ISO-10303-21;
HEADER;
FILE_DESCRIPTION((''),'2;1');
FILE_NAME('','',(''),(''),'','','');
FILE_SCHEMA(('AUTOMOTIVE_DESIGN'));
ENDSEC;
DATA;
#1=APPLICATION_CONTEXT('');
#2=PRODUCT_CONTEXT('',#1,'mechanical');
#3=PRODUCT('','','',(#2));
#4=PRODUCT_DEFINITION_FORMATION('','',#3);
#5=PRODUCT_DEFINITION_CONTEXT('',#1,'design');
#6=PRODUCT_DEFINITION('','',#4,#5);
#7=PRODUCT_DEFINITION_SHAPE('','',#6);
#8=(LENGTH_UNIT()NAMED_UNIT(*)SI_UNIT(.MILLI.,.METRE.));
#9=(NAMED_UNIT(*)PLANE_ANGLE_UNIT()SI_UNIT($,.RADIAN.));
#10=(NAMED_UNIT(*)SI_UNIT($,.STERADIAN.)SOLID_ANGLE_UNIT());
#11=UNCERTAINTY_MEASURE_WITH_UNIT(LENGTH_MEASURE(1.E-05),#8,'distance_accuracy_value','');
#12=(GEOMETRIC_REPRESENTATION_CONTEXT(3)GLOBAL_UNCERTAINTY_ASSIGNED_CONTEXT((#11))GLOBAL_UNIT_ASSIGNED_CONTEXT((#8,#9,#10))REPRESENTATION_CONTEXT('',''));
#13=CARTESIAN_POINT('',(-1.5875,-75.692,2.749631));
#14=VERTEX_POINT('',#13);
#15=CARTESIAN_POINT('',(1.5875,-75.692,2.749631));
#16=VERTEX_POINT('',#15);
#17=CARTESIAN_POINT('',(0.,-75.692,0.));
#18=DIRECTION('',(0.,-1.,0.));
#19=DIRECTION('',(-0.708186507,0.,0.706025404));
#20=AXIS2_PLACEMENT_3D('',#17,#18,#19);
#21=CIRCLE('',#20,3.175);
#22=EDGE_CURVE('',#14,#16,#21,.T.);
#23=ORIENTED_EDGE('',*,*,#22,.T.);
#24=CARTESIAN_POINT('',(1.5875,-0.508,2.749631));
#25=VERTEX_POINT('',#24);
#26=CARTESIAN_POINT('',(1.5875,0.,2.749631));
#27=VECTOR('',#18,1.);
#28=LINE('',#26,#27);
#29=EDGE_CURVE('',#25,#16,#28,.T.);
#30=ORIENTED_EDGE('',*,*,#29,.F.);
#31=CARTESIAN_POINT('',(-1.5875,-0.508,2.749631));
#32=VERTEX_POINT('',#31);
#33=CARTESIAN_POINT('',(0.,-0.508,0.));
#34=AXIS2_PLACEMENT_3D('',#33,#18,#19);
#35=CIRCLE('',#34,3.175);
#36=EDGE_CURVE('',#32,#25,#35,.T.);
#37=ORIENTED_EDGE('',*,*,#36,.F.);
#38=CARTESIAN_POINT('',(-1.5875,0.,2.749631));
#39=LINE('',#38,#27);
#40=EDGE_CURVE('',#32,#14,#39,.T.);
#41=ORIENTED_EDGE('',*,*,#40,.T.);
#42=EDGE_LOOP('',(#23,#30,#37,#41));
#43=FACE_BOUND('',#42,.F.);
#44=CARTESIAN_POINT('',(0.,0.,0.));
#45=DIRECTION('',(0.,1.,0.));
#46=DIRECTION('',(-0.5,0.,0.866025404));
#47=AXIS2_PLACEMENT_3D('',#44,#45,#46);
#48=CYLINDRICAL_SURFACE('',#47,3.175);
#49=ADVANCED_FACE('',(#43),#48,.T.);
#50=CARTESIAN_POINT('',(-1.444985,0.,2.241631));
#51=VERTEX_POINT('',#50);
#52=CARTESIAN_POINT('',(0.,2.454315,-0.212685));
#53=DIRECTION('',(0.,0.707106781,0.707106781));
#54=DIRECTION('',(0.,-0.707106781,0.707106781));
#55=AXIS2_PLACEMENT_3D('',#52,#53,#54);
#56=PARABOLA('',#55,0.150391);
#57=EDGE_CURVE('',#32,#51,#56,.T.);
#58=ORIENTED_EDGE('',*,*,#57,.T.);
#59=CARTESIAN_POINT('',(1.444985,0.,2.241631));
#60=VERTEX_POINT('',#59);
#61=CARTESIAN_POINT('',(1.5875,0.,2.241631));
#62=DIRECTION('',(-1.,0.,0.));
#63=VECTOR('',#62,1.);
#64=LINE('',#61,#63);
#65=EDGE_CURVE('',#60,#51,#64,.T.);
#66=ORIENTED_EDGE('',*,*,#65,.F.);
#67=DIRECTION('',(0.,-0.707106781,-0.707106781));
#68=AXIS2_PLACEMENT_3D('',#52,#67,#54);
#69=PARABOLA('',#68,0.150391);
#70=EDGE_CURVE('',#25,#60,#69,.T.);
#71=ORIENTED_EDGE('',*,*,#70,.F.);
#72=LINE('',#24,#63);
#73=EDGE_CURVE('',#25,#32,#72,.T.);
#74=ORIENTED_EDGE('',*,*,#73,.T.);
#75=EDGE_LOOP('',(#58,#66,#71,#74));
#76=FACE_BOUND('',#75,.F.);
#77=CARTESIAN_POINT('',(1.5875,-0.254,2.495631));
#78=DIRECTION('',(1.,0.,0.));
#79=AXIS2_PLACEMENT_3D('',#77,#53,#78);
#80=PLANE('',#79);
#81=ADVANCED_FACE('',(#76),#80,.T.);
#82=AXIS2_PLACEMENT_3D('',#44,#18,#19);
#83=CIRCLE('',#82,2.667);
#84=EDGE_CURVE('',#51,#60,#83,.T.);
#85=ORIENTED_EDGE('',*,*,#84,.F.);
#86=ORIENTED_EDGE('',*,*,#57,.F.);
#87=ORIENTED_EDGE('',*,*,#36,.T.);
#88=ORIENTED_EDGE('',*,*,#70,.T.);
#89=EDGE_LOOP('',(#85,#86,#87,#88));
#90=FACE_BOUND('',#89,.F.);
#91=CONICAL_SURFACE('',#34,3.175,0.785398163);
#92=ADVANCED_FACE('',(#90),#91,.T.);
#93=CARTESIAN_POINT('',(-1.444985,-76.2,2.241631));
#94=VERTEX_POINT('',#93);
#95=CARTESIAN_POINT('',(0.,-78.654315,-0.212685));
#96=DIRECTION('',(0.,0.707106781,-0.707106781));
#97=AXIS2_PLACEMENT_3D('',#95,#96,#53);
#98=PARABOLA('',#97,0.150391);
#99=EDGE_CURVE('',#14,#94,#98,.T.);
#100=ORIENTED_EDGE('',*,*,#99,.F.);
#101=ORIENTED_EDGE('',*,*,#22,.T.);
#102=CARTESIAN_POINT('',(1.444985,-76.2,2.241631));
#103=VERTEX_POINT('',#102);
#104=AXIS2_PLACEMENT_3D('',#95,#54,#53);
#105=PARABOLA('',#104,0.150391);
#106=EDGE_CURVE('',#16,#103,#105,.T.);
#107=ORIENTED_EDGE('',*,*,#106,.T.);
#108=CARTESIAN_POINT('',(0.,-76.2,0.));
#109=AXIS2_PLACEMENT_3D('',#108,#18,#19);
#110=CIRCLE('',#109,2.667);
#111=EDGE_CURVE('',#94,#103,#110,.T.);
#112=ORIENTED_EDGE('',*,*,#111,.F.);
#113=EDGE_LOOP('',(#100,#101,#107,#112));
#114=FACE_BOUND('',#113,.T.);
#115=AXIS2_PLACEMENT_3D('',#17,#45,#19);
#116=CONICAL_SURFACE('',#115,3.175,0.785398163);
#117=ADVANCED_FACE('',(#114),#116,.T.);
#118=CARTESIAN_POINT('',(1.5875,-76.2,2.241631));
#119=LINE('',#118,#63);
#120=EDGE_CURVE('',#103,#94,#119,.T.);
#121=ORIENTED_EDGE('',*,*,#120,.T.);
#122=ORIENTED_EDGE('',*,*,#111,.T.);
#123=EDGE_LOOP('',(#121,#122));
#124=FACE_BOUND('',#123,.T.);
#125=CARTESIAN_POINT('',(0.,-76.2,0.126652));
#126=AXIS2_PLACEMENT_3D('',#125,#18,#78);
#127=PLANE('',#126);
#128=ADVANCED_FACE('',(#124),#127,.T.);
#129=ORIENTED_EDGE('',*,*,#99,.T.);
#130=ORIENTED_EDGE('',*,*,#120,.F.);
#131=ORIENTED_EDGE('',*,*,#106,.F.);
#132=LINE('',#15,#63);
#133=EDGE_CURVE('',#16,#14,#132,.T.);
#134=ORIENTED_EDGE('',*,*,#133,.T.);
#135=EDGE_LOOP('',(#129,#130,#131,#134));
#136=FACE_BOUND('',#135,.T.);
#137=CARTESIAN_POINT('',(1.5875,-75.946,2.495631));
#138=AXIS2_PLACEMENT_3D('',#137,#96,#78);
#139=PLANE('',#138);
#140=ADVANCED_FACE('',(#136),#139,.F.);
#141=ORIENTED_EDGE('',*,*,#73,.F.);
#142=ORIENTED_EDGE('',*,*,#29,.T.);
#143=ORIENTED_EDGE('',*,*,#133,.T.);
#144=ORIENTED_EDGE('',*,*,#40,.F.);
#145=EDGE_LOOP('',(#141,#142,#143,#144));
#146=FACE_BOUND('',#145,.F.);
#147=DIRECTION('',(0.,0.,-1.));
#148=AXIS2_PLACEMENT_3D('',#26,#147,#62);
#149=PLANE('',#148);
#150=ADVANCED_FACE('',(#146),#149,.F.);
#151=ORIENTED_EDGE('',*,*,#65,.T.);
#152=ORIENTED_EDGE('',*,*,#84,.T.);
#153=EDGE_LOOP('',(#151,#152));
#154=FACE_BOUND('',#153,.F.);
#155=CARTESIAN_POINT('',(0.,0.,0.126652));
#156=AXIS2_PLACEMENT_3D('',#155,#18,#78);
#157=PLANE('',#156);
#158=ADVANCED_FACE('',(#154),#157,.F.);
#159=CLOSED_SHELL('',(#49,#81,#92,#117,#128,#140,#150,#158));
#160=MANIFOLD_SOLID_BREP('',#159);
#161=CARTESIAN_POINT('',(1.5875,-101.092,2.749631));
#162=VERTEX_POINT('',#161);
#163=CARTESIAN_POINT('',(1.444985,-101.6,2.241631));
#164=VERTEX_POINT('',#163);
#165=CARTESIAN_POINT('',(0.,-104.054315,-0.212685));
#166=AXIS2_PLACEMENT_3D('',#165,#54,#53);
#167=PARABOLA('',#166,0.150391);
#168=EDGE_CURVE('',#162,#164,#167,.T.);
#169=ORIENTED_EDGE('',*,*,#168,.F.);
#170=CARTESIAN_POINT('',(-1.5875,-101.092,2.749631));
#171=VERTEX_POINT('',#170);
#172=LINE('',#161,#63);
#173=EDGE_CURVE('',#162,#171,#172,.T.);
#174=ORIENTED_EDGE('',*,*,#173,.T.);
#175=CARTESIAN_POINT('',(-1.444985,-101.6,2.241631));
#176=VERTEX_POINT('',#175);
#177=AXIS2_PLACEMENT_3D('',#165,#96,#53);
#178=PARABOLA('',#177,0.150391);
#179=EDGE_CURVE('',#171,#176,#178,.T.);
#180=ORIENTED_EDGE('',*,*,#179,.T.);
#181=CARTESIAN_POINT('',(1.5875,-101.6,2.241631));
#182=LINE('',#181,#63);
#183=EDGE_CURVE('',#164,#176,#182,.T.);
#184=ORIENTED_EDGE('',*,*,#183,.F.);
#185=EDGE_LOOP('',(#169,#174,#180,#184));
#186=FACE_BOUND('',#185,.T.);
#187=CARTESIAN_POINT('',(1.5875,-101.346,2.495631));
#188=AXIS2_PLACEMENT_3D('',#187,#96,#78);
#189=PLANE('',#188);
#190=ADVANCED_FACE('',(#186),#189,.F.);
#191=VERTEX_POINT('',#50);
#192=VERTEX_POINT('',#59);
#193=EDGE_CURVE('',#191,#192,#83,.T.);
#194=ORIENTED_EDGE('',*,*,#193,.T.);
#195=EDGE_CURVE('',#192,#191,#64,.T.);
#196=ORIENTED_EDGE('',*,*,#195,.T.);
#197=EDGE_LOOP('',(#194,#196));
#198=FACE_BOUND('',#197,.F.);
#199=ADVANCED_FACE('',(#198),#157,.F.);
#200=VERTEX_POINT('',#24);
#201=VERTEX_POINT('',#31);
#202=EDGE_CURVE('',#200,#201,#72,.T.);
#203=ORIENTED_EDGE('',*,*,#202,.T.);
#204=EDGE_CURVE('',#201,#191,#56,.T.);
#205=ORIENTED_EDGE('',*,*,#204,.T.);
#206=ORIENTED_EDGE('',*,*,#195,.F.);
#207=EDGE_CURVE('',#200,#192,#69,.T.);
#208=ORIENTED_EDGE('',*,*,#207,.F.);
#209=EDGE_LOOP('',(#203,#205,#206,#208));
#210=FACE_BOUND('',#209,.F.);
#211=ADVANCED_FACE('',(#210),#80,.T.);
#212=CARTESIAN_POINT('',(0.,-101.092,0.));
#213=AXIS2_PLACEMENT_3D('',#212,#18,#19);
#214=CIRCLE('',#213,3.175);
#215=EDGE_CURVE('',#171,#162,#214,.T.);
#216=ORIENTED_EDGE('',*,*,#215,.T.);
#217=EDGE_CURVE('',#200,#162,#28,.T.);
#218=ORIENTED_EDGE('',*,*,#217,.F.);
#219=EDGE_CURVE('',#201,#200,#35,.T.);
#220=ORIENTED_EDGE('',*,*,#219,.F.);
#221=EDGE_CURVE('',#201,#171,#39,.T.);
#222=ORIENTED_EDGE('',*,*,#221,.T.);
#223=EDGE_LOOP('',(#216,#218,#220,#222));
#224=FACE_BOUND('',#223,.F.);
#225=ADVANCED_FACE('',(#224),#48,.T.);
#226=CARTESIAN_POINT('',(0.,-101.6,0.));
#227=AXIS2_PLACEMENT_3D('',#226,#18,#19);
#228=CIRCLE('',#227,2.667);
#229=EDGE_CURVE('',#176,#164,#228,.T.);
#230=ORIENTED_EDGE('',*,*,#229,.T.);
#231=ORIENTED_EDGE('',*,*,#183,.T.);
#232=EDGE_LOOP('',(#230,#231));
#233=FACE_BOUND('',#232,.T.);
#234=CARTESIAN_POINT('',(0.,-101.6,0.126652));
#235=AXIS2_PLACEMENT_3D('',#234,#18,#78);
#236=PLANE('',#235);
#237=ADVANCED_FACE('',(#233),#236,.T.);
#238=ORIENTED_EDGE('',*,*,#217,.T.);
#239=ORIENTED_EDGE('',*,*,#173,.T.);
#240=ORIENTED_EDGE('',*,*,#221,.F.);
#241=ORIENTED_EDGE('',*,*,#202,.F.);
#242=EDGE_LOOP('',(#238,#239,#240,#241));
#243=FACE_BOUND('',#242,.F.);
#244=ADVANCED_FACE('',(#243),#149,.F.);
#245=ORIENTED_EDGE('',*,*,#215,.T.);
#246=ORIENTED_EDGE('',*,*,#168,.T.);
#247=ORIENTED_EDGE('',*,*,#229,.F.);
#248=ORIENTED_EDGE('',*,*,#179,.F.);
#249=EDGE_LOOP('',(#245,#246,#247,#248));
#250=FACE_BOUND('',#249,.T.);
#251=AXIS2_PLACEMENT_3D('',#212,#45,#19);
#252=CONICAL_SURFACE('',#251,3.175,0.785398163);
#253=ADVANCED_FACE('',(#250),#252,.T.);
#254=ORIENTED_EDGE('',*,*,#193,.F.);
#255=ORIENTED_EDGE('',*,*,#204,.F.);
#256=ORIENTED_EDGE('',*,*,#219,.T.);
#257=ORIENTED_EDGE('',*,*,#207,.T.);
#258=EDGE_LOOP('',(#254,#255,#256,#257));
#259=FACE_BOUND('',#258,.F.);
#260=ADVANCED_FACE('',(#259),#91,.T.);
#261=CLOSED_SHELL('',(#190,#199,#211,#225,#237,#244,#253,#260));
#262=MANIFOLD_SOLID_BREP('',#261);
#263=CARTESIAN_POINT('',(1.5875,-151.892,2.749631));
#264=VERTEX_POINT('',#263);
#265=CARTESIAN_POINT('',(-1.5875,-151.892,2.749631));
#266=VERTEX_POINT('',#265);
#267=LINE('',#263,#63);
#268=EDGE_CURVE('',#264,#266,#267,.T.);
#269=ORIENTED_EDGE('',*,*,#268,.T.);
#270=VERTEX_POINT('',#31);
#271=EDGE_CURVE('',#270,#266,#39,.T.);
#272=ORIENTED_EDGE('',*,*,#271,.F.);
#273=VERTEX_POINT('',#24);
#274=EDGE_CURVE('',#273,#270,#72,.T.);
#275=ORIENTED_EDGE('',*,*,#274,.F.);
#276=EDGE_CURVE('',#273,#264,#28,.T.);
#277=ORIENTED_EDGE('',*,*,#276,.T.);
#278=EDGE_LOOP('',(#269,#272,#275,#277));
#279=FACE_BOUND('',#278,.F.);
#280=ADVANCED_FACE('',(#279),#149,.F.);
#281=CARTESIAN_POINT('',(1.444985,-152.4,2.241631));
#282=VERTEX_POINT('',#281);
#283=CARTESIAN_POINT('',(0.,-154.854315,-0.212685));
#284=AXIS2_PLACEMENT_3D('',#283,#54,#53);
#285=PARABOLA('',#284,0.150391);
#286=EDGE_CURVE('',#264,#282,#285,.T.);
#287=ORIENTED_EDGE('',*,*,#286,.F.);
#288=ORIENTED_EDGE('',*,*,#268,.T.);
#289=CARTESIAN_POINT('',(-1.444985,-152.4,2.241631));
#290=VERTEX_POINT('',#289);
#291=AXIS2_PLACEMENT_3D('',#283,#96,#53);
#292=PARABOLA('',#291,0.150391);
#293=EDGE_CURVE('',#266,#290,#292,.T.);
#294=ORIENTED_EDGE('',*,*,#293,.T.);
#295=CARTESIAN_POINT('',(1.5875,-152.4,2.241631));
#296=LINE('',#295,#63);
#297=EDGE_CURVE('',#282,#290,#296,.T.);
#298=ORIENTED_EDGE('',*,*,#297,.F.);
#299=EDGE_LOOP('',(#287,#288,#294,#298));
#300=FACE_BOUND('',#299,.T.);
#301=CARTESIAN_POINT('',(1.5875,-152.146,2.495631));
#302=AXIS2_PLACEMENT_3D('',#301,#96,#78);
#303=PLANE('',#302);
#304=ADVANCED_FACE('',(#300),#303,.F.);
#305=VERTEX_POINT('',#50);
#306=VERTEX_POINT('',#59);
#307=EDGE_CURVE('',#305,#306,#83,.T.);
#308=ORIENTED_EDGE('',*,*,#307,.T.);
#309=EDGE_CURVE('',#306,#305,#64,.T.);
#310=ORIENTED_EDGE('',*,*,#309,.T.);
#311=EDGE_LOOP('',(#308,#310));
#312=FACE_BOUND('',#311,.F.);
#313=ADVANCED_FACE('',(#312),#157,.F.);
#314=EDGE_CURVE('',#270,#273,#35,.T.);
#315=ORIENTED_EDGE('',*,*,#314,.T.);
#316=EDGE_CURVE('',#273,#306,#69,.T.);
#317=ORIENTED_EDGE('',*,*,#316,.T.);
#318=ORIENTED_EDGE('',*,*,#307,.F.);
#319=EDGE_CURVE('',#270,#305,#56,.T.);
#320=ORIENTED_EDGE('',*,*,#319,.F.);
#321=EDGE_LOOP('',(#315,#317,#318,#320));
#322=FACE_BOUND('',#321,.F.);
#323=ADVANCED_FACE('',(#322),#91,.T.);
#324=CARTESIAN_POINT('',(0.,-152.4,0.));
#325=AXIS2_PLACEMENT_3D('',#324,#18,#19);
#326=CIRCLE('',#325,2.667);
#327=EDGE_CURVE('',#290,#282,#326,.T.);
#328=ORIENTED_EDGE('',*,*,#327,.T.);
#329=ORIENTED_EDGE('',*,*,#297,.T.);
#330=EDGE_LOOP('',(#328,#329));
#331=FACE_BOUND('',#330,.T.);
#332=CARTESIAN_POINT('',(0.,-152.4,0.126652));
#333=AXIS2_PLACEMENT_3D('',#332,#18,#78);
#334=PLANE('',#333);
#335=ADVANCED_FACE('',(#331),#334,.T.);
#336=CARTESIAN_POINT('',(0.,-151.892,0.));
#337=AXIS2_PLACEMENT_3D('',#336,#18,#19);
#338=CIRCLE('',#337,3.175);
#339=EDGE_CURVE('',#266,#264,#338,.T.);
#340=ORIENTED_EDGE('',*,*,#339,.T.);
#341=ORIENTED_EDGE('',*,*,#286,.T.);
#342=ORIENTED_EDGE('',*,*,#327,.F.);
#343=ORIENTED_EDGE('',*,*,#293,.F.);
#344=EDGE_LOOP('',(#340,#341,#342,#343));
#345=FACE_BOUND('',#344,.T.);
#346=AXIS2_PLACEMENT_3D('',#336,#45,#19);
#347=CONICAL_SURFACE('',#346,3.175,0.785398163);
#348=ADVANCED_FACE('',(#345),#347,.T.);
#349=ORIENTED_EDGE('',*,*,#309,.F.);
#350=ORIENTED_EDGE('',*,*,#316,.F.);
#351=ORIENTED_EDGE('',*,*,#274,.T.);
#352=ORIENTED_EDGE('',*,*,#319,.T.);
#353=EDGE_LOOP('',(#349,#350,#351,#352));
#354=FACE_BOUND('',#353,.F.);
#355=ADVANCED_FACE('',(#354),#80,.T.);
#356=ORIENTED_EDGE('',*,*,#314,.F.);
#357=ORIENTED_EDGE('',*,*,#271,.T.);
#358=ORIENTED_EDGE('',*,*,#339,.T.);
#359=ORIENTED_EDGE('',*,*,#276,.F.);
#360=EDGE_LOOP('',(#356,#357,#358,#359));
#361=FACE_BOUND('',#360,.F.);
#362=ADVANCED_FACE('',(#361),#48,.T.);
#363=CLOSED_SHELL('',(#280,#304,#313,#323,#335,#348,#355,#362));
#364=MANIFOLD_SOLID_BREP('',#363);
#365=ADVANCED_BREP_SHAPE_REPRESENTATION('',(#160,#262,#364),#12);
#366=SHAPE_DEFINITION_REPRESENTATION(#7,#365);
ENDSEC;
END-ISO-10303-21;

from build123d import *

# Parameters (mm, degrees)
F1_DEPTH     = 152.4
F2_DEPTH     = 76.2
F3_DEPTH     = 101.6
F4_C1_SIZE   = 0.508
F4_C2_SIZE   = 0.508
F4_C3_SIZE   = 0.508
F4_C4_SIZE   = 0.508
F4_2_C1_SIZE = 0.508
F4_2_C2_SIZE = 0.508
F4_2_C3_SIZE = 0.508
F4_2_C4_SIZE = 0.508
F4_3_C1_SIZE = 0.508
F4_3_C2_SIZE = 0.508
F4_3_C3_SIZE = 0.508
F4_3_C4_SIZE = 0.508


with BuildPart() as f1:
    # F0 (on Front) → F1 (new body)
    with BuildSketch(Plane.XZ):
        with BuildLine():
            Line((1.5875, 2.749630657), (-1.5875, 2.749630657))
            ThreePointArc((-1.5875, 2.749630657), (0, -3.175), (1.5875, 2.749630657))
        make_face()
    extrude(amount=F1_DEPTH)

    # F4: chamfer of 0.508 on 4 edges, made by hand

    # F4_c1
    f4_c1_edges = [f1.edges().sort_by_distance(p)[0] for p in [
        (0, 0, 2.749630657),
    ]]
    chamfer(f4_c1_edges, length=F4_C1_SIZE)

    # F4_c2
    f4_c2_edges = [f1.edges().sort_by_distance(p)[0] for p in [
        (0, -152.4, 2.749630657),
    ]]
    chamfer(f4_c2_edges, length=F4_C2_SIZE)

    # F4_c3
    f4_c3_edges = [f1.edges().sort_by_distance(p)[0] for p in [
        (0, 0, -3.175),
    ]]
    chamfer(f4_c3_edges, length=F4_C3_SIZE)

    # F4_c4
    f4_c4_edges = [f1.edges().sort_by_distance(p)[0] for p in [
        (0, -152.4, -3.175),
    ]]
    chamfer(f4_c4_edges, length=F4_C4_SIZE)


with BuildPart() as f2:
    # F0 (on Front) → F2 (new body)
    with BuildSketch(Plane.XZ):
        with BuildLine():
            Line((1.5875, 2.749630657), (-1.5875, 2.749630657))
            ThreePointArc((-1.5875, 2.749630657), (0, -3.175), (1.5875, 2.749630657))
        make_face()
    extrude(amount=F2_DEPTH)

    # F4#2: chamfer of 0.508 on 4 edges, made by hand

    # F4_2_c1
    f4_2_c1_edges = [f2.edges().sort_by_distance(p)[0] for p in [
        (0, 0, 2.749630657),
    ]]
    chamfer(f4_2_c1_edges, length=F4_2_C1_SIZE)

    # F4_2_c2
    f4_2_c2_edges = [f2.edges().sort_by_distance(p)[0] for p in [
        (0, -76.2, 2.749630657),
    ]]
    chamfer(f4_2_c2_edges, length=F4_2_C2_SIZE)

    # F4_2_c3
    f4_2_c3_edges = [f2.edges().sort_by_distance(p)[0] for p in [
        (0, 0, -3.175),
    ]]
    chamfer(f4_2_c3_edges, length=F4_2_C3_SIZE)

    # F4_2_c4
    f4_2_c4_edges = [f2.edges().sort_by_distance(p)[0] for p in [
        (0, -76.2, -3.175),
    ]]
    chamfer(f4_2_c4_edges, length=F4_2_C4_SIZE)


with BuildPart() as f3:
    # F0 (on Front) → F3 (new body)
    with BuildSketch(Plane.XZ):
        with BuildLine():
            Line((1.5875, 2.749630657), (-1.5875, 2.749630657))
            ThreePointArc((-1.5875, 2.749630657), (0, -3.175), (1.5875, 2.749630657))
        make_face()
    extrude(amount=F3_DEPTH)

    # F4#3: chamfer of 0.508 on 4 edges, made by hand

    # F4_3_c1
    f4_3_c1_edges = [f3.edges().sort_by_distance(p)[0] for p in [
        (0, 0, 2.749630657),
    ]]
    chamfer(f4_3_c1_edges, length=F4_3_C1_SIZE)

    # F4_3_c2
    f4_3_c2_edges = [f3.edges().sort_by_distance(p)[0] for p in [
        (0, -101.6, 2.749630657),
    ]]
    chamfer(f4_3_c2_edges, length=F4_3_C2_SIZE)

    # F4_3_c3
    f4_3_c3_edges = [f3.edges().sort_by_distance(p)[0] for p in [
        (0, 0, -3.175),
    ]]
    chamfer(f4_3_c3_edges, length=F4_3_C3_SIZE)

    # F4_3_c4
    f4_3_c4_edges = [f3.edges().sort_by_distance(p)[0] for p in [
        (0, -101.6, -3.175),
    ]]
    chamfer(f4_3_c4_edges, length=F4_3_C4_SIZE)


solid = Compound([f1.part, f2.part, f3.part])
